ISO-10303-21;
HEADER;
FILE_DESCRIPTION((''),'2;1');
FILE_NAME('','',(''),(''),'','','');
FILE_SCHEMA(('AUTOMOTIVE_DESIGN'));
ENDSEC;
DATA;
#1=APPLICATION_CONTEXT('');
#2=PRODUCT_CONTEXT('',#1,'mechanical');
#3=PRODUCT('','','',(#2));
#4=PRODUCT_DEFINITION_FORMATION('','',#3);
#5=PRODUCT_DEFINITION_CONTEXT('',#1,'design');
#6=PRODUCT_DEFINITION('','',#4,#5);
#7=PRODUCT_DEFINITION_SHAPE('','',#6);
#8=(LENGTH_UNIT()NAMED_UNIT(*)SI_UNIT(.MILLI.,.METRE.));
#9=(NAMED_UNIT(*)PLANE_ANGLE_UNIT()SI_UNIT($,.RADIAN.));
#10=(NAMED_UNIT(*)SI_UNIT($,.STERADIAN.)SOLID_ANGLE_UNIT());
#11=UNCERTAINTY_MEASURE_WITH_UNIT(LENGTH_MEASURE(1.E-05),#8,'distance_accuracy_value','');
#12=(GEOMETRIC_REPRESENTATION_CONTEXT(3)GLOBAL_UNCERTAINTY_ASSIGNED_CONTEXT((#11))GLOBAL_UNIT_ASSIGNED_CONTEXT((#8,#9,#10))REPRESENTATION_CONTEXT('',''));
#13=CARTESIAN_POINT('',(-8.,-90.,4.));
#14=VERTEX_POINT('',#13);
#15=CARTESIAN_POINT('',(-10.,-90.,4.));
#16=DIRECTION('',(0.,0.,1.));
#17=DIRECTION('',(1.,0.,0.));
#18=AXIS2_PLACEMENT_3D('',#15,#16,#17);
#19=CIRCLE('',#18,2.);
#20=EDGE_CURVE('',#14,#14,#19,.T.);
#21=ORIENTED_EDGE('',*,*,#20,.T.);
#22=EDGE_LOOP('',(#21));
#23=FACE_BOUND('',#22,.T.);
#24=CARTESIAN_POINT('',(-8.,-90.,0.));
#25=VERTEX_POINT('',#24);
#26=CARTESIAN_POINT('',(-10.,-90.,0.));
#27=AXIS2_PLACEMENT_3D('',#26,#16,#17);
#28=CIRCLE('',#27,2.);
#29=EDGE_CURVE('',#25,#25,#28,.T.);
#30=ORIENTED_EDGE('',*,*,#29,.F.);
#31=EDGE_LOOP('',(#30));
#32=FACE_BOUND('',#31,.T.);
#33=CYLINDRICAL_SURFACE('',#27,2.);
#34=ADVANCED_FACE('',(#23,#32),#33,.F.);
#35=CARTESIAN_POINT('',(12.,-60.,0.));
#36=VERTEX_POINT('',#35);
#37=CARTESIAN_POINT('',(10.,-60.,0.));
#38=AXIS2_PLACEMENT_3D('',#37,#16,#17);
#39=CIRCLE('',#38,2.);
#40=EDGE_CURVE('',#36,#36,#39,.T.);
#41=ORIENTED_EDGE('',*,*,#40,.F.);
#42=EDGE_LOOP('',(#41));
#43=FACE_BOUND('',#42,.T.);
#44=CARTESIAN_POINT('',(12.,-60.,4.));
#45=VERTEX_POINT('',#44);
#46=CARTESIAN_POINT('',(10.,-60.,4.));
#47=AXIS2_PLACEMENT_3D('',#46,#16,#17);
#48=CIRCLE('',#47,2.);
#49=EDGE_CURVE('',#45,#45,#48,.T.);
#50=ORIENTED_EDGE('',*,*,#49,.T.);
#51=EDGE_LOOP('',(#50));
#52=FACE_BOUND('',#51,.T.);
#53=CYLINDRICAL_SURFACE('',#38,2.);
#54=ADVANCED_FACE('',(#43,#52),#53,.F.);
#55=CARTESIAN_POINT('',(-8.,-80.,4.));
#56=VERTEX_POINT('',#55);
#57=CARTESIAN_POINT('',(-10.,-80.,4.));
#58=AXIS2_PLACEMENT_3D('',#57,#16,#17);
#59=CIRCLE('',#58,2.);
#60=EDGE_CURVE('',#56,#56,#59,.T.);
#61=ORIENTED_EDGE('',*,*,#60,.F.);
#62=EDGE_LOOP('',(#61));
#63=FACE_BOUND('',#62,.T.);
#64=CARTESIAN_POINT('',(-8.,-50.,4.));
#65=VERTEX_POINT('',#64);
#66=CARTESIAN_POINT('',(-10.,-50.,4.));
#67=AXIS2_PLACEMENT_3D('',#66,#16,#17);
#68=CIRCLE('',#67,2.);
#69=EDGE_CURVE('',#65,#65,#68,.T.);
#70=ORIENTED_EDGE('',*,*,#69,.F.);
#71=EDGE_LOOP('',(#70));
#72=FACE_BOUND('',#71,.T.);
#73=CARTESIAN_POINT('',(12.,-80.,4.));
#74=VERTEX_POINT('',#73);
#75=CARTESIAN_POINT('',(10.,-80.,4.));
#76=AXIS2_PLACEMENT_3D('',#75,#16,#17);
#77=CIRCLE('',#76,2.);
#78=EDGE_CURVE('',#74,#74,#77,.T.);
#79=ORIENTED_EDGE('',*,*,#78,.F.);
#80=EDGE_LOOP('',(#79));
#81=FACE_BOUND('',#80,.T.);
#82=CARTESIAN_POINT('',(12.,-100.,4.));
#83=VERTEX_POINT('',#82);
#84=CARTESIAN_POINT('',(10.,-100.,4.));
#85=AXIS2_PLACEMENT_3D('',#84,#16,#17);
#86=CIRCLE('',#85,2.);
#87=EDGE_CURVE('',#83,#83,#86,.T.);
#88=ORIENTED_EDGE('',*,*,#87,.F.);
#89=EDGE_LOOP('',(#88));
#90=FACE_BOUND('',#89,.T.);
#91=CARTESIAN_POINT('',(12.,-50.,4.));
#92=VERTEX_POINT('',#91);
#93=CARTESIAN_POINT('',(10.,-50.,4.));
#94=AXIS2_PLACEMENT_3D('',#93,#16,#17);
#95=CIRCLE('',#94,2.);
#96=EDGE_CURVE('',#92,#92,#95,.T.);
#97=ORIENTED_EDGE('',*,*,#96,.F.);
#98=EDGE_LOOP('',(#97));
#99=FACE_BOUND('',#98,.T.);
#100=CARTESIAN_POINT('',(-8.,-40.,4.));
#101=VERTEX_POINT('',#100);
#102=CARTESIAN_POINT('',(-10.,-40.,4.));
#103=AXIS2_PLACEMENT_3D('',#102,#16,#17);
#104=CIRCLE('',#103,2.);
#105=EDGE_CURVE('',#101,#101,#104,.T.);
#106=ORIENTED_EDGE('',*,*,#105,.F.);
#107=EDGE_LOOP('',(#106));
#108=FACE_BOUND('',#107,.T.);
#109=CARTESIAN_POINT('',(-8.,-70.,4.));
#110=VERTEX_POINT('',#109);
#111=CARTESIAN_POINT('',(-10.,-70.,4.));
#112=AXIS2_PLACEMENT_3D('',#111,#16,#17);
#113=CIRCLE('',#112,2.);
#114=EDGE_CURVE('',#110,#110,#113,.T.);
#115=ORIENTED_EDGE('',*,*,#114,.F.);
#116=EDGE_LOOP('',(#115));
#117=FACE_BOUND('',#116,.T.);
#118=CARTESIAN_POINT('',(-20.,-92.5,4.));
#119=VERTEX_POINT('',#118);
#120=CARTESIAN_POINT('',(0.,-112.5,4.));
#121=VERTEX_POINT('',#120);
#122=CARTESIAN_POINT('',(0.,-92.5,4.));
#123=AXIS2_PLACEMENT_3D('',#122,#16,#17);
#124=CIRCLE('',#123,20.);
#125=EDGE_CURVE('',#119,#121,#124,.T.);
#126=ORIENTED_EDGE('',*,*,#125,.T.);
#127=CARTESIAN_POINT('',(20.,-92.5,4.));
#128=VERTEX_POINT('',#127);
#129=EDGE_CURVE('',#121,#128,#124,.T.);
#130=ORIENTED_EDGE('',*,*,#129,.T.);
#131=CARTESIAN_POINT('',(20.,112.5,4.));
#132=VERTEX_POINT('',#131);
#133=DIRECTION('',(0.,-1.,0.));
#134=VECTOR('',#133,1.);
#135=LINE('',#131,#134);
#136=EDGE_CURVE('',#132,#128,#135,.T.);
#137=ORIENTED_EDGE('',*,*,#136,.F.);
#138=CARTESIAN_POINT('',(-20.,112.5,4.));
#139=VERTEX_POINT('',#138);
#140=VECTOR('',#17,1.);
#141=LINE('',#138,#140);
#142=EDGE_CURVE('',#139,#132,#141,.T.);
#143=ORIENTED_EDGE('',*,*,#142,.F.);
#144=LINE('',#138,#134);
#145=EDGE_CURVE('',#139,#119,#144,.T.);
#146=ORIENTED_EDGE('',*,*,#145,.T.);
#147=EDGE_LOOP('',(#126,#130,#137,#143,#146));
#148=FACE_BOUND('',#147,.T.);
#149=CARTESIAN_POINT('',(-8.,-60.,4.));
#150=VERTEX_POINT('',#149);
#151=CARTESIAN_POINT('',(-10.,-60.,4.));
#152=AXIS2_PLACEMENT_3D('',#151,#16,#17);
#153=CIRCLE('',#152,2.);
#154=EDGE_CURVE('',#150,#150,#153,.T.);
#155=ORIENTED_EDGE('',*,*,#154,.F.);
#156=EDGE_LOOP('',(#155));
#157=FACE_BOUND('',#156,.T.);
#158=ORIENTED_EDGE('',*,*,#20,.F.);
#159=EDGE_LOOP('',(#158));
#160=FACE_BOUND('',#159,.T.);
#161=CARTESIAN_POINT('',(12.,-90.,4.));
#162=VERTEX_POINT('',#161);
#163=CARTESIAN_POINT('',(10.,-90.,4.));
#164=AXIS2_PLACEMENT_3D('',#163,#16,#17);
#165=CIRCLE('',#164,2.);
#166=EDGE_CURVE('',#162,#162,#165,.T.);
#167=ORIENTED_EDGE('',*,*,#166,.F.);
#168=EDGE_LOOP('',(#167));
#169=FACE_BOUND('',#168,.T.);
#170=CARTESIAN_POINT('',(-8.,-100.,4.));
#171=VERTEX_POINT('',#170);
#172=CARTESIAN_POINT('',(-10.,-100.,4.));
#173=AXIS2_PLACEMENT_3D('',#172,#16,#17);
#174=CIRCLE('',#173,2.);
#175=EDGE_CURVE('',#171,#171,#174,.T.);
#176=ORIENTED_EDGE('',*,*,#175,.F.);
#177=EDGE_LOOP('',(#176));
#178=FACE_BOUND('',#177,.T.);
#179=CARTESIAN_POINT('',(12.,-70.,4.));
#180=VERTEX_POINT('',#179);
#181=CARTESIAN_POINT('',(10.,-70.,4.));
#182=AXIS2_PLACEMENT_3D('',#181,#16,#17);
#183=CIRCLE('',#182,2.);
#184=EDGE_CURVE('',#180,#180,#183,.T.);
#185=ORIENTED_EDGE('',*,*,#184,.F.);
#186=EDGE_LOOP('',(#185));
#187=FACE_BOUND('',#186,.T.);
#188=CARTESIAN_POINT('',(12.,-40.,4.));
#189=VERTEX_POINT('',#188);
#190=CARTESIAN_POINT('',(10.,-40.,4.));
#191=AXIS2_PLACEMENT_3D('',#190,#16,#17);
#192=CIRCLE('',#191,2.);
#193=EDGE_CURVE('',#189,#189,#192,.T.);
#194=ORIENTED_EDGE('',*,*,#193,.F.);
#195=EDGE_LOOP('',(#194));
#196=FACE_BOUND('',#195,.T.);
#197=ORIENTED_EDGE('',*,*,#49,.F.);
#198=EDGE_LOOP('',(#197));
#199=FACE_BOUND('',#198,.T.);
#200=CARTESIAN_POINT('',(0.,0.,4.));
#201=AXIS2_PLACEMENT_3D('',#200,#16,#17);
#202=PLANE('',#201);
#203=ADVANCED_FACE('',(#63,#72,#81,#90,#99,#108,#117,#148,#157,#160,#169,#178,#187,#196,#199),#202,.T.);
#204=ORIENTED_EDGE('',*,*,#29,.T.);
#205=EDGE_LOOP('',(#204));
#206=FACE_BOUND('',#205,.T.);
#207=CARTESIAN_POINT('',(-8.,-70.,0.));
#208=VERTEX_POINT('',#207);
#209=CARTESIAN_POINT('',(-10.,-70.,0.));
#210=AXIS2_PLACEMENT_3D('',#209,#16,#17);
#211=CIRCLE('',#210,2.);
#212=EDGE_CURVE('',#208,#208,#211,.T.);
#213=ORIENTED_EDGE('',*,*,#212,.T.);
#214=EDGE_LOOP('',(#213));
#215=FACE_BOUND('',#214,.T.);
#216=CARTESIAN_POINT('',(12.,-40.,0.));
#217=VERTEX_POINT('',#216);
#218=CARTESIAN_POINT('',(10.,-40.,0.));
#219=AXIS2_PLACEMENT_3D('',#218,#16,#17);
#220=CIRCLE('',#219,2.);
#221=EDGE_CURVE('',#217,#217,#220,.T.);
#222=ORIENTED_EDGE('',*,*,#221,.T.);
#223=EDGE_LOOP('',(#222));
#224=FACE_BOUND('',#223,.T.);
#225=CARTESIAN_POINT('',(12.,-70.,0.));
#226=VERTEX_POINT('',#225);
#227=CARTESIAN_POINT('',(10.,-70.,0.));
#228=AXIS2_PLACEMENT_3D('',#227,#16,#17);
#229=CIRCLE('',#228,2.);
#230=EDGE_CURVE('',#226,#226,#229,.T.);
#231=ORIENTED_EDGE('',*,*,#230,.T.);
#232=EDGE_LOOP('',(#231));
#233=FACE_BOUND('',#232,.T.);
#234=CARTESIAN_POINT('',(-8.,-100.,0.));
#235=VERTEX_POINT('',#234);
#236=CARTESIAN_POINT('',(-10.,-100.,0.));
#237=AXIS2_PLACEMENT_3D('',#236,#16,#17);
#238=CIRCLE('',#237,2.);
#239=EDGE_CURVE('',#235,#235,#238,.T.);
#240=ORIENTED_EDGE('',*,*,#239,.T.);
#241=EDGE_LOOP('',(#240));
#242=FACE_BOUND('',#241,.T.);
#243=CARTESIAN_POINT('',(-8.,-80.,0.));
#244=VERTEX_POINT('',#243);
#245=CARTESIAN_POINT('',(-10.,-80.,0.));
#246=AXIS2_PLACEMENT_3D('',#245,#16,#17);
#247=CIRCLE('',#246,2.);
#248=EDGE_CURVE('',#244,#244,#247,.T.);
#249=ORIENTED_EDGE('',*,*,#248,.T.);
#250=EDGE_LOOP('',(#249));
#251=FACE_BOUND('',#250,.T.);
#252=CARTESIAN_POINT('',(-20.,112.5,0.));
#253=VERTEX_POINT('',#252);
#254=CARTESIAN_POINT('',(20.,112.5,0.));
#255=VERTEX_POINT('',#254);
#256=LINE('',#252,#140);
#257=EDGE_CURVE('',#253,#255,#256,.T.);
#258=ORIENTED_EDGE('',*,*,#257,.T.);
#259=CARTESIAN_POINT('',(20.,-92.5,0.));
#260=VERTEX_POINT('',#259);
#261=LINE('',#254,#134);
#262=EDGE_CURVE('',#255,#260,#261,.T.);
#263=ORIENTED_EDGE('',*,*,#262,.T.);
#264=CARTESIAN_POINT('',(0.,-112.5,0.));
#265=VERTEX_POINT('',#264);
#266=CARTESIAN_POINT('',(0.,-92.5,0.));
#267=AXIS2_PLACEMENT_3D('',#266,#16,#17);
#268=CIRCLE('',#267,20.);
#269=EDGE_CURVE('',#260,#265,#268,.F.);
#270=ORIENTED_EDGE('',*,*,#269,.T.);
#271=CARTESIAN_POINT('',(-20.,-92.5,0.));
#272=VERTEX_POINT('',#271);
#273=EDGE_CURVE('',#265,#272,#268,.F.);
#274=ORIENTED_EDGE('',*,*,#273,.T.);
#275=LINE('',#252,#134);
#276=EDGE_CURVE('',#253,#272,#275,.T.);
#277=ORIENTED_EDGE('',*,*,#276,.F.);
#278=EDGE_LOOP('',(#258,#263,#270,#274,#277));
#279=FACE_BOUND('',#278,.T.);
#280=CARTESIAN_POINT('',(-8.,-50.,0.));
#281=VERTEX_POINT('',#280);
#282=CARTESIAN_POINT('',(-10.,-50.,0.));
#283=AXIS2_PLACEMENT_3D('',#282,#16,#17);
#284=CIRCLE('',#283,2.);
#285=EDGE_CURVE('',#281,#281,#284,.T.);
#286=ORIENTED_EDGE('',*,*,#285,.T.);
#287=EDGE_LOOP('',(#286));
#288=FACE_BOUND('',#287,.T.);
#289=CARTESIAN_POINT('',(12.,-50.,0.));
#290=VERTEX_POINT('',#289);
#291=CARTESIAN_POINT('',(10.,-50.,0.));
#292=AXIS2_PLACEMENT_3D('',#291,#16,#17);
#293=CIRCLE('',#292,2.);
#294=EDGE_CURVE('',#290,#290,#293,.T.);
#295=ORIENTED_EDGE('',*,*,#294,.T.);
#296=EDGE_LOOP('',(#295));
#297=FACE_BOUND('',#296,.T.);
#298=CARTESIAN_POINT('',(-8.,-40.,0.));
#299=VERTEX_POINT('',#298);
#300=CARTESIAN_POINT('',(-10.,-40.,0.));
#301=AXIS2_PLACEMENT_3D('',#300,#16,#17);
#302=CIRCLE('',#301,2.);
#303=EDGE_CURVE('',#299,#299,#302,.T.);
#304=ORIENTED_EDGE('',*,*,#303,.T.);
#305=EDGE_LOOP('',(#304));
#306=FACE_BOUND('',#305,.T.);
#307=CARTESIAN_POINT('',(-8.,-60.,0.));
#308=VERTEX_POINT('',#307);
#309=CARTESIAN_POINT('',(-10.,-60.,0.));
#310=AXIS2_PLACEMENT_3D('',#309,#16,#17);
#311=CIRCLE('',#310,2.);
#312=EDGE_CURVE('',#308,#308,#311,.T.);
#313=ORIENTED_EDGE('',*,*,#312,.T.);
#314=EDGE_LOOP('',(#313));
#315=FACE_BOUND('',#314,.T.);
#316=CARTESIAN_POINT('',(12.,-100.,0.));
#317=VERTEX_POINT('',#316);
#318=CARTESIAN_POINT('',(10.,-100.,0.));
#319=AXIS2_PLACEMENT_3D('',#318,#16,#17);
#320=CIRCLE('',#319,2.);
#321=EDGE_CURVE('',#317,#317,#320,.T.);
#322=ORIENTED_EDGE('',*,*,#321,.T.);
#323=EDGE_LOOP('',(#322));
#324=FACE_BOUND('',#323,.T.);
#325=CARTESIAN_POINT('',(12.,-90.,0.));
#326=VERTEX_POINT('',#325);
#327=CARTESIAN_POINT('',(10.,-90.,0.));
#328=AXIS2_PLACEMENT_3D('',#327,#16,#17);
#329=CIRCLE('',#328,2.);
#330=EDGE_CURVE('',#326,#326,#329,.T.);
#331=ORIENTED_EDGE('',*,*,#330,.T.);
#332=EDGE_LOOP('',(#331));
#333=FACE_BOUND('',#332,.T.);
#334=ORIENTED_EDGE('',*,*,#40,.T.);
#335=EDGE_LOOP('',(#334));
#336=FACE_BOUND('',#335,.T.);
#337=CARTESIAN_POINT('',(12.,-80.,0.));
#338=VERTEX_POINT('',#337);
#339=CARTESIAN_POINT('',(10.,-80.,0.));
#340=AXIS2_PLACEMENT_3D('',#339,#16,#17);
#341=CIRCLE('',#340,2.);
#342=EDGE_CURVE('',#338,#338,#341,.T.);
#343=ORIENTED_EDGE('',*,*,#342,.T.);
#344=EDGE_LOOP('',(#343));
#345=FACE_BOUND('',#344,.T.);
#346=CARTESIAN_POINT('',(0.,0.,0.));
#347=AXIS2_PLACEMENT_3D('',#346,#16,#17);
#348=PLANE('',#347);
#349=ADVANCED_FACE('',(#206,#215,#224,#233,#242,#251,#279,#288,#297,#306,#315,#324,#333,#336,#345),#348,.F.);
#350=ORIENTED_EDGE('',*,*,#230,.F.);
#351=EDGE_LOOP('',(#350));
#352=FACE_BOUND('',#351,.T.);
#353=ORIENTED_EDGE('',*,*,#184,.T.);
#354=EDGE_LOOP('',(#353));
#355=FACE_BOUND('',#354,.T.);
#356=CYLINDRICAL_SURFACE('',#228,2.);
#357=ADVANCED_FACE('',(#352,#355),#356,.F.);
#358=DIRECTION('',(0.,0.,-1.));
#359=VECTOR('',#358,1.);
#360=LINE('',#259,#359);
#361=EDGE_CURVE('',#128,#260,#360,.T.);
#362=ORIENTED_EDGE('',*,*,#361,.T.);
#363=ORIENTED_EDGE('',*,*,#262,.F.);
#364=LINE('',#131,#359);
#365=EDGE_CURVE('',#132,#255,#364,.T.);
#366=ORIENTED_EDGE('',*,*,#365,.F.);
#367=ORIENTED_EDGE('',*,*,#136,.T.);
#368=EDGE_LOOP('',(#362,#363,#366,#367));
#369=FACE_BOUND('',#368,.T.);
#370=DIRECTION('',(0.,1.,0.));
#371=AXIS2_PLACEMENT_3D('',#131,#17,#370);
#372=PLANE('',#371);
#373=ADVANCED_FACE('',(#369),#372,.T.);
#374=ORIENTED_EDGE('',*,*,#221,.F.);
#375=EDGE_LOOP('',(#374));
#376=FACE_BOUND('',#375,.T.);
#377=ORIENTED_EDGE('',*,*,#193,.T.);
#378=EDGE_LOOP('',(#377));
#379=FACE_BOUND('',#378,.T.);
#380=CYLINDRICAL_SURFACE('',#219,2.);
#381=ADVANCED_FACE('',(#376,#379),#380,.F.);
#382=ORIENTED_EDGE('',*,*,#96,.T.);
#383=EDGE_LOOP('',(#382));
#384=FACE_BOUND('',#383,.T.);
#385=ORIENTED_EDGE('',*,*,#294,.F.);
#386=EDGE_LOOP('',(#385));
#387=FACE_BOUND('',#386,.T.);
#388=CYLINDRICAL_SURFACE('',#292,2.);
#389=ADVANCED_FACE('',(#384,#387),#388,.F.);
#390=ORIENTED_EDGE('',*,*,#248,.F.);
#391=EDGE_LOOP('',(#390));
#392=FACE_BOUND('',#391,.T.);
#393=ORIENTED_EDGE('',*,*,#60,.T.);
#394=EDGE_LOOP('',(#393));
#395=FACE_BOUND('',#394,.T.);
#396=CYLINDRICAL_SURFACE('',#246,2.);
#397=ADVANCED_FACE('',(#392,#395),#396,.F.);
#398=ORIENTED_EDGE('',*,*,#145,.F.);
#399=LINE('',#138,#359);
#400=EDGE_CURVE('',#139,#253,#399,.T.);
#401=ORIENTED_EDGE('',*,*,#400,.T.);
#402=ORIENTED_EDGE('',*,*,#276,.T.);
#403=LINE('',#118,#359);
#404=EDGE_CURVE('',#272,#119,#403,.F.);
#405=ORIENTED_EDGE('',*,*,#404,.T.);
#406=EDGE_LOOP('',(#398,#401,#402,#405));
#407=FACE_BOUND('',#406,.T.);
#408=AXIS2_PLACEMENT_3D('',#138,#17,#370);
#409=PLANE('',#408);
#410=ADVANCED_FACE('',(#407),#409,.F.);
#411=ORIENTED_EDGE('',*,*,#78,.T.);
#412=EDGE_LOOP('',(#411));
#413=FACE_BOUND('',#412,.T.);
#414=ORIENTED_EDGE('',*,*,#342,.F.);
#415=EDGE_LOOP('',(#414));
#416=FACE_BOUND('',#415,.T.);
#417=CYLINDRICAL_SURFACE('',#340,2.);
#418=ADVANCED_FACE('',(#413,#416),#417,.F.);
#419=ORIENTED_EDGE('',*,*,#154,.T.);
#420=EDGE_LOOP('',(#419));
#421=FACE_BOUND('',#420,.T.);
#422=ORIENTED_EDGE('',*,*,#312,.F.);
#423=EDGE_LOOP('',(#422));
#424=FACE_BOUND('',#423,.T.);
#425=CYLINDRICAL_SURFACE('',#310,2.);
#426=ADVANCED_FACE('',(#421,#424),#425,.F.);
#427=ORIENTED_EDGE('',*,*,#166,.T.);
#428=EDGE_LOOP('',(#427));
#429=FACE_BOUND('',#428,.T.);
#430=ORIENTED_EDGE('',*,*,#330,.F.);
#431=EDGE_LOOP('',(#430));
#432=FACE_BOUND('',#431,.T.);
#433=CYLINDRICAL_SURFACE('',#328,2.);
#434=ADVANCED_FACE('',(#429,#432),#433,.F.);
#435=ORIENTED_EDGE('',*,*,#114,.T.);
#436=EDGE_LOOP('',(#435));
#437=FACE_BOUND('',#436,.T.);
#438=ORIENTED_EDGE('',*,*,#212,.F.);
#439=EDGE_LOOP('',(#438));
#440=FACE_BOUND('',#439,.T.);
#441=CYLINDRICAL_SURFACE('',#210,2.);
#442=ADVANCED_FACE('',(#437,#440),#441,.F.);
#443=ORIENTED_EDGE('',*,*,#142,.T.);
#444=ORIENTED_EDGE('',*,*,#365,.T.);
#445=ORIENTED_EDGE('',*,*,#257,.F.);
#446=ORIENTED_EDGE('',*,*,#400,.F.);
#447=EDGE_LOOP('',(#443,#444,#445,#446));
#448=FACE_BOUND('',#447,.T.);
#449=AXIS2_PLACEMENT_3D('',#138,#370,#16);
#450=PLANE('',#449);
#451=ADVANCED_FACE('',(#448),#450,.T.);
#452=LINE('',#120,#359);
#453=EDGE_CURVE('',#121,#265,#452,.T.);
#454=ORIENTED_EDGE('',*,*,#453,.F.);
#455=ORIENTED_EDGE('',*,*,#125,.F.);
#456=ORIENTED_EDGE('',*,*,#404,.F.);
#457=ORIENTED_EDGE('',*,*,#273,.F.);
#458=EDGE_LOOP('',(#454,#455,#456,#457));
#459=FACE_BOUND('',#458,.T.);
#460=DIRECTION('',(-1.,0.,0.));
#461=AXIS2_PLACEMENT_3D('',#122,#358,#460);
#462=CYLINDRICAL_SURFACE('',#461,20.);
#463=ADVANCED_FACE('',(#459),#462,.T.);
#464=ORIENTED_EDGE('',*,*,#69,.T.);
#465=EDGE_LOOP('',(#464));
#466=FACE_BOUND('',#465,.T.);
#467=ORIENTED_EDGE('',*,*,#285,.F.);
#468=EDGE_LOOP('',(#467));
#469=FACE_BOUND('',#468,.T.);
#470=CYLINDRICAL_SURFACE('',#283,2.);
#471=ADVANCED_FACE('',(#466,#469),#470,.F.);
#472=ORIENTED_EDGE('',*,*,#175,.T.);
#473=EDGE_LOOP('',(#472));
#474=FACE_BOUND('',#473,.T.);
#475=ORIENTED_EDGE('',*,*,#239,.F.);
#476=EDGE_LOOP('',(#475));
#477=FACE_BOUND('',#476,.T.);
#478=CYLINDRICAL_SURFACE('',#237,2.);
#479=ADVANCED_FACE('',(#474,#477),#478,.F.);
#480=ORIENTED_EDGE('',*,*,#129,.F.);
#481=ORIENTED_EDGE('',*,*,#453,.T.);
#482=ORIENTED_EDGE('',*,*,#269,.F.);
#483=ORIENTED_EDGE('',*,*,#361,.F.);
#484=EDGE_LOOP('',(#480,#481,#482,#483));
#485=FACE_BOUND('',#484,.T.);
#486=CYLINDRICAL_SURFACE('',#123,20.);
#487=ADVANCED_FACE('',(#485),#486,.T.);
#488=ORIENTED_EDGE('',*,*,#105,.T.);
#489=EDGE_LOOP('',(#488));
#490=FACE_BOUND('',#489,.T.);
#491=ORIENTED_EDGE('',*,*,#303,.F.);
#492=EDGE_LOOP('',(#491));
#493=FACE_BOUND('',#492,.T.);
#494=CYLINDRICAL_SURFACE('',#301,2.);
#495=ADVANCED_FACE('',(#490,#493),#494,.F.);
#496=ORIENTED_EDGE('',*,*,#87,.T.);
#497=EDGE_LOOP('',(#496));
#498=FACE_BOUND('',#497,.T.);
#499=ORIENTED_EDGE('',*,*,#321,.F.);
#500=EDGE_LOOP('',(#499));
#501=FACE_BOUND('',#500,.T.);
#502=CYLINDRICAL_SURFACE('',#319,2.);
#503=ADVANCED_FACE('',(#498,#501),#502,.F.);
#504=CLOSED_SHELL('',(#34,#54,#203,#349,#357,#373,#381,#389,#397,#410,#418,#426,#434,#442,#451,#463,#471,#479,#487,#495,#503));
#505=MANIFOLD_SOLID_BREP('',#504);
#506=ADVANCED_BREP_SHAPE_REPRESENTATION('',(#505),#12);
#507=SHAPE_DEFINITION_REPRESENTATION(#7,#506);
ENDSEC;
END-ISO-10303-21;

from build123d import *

# Parameters (mm, degrees)
SKETCH2_W           = 40
SKETCH2_H           = 225
BOSS_EXTRUDE1_DEPTH = 4
SKETCH3_R           = 2
CUT_EXTRUDE1_DEPTH  = 115.333940718
LPATTERN1_COUNT     = 7
LPATTERN1_PITCH     = 10
FILLET2_R           = 20


with BuildPart() as part:
    # Sketch2 → Boss-Extrude1 (new body)
    with BuildSketch(Plane.XY):
        Rectangle(SKETCH2_W, SKETCH2_H)
    extrude(amount=BOSS_EXTRUDE1_DEPTH)

    # Sketch3 → Cut-Extrude1 (cut, through all)
    with BuildSketch(Plane.XY.offset(4)):
        with Locations((-10, -100)):
            Circle(SKETCH3_R)
        with Locations((10, -100)):
            Circle(SKETCH3_R)
    cut_extrude1 = extrude(amount=-CUT_EXTRUDE1_DEPTH, mode=Mode.SUBTRACT)

    # LPattern1: Cut-Extrude1 ×7
    with Locations(*[(0, i * LPATTERN1_PITCH, 0) for i in range(1, LPATTERN1_COUNT)]):
        add(cut_extrude1, mode=Mode.SUBTRACT)

    # Fillet2
    fillet2_edges = [part.edges().sort_by_distance(p)[0] for p in [
        (20, -112.5, 2),
        (-20, -112.5, 2),
    ]]
    fillet(fillet2_edges, radius=FILLET2_R - 0.0001)  # a hair under: the kernel refuses the full size


solid = part.part
